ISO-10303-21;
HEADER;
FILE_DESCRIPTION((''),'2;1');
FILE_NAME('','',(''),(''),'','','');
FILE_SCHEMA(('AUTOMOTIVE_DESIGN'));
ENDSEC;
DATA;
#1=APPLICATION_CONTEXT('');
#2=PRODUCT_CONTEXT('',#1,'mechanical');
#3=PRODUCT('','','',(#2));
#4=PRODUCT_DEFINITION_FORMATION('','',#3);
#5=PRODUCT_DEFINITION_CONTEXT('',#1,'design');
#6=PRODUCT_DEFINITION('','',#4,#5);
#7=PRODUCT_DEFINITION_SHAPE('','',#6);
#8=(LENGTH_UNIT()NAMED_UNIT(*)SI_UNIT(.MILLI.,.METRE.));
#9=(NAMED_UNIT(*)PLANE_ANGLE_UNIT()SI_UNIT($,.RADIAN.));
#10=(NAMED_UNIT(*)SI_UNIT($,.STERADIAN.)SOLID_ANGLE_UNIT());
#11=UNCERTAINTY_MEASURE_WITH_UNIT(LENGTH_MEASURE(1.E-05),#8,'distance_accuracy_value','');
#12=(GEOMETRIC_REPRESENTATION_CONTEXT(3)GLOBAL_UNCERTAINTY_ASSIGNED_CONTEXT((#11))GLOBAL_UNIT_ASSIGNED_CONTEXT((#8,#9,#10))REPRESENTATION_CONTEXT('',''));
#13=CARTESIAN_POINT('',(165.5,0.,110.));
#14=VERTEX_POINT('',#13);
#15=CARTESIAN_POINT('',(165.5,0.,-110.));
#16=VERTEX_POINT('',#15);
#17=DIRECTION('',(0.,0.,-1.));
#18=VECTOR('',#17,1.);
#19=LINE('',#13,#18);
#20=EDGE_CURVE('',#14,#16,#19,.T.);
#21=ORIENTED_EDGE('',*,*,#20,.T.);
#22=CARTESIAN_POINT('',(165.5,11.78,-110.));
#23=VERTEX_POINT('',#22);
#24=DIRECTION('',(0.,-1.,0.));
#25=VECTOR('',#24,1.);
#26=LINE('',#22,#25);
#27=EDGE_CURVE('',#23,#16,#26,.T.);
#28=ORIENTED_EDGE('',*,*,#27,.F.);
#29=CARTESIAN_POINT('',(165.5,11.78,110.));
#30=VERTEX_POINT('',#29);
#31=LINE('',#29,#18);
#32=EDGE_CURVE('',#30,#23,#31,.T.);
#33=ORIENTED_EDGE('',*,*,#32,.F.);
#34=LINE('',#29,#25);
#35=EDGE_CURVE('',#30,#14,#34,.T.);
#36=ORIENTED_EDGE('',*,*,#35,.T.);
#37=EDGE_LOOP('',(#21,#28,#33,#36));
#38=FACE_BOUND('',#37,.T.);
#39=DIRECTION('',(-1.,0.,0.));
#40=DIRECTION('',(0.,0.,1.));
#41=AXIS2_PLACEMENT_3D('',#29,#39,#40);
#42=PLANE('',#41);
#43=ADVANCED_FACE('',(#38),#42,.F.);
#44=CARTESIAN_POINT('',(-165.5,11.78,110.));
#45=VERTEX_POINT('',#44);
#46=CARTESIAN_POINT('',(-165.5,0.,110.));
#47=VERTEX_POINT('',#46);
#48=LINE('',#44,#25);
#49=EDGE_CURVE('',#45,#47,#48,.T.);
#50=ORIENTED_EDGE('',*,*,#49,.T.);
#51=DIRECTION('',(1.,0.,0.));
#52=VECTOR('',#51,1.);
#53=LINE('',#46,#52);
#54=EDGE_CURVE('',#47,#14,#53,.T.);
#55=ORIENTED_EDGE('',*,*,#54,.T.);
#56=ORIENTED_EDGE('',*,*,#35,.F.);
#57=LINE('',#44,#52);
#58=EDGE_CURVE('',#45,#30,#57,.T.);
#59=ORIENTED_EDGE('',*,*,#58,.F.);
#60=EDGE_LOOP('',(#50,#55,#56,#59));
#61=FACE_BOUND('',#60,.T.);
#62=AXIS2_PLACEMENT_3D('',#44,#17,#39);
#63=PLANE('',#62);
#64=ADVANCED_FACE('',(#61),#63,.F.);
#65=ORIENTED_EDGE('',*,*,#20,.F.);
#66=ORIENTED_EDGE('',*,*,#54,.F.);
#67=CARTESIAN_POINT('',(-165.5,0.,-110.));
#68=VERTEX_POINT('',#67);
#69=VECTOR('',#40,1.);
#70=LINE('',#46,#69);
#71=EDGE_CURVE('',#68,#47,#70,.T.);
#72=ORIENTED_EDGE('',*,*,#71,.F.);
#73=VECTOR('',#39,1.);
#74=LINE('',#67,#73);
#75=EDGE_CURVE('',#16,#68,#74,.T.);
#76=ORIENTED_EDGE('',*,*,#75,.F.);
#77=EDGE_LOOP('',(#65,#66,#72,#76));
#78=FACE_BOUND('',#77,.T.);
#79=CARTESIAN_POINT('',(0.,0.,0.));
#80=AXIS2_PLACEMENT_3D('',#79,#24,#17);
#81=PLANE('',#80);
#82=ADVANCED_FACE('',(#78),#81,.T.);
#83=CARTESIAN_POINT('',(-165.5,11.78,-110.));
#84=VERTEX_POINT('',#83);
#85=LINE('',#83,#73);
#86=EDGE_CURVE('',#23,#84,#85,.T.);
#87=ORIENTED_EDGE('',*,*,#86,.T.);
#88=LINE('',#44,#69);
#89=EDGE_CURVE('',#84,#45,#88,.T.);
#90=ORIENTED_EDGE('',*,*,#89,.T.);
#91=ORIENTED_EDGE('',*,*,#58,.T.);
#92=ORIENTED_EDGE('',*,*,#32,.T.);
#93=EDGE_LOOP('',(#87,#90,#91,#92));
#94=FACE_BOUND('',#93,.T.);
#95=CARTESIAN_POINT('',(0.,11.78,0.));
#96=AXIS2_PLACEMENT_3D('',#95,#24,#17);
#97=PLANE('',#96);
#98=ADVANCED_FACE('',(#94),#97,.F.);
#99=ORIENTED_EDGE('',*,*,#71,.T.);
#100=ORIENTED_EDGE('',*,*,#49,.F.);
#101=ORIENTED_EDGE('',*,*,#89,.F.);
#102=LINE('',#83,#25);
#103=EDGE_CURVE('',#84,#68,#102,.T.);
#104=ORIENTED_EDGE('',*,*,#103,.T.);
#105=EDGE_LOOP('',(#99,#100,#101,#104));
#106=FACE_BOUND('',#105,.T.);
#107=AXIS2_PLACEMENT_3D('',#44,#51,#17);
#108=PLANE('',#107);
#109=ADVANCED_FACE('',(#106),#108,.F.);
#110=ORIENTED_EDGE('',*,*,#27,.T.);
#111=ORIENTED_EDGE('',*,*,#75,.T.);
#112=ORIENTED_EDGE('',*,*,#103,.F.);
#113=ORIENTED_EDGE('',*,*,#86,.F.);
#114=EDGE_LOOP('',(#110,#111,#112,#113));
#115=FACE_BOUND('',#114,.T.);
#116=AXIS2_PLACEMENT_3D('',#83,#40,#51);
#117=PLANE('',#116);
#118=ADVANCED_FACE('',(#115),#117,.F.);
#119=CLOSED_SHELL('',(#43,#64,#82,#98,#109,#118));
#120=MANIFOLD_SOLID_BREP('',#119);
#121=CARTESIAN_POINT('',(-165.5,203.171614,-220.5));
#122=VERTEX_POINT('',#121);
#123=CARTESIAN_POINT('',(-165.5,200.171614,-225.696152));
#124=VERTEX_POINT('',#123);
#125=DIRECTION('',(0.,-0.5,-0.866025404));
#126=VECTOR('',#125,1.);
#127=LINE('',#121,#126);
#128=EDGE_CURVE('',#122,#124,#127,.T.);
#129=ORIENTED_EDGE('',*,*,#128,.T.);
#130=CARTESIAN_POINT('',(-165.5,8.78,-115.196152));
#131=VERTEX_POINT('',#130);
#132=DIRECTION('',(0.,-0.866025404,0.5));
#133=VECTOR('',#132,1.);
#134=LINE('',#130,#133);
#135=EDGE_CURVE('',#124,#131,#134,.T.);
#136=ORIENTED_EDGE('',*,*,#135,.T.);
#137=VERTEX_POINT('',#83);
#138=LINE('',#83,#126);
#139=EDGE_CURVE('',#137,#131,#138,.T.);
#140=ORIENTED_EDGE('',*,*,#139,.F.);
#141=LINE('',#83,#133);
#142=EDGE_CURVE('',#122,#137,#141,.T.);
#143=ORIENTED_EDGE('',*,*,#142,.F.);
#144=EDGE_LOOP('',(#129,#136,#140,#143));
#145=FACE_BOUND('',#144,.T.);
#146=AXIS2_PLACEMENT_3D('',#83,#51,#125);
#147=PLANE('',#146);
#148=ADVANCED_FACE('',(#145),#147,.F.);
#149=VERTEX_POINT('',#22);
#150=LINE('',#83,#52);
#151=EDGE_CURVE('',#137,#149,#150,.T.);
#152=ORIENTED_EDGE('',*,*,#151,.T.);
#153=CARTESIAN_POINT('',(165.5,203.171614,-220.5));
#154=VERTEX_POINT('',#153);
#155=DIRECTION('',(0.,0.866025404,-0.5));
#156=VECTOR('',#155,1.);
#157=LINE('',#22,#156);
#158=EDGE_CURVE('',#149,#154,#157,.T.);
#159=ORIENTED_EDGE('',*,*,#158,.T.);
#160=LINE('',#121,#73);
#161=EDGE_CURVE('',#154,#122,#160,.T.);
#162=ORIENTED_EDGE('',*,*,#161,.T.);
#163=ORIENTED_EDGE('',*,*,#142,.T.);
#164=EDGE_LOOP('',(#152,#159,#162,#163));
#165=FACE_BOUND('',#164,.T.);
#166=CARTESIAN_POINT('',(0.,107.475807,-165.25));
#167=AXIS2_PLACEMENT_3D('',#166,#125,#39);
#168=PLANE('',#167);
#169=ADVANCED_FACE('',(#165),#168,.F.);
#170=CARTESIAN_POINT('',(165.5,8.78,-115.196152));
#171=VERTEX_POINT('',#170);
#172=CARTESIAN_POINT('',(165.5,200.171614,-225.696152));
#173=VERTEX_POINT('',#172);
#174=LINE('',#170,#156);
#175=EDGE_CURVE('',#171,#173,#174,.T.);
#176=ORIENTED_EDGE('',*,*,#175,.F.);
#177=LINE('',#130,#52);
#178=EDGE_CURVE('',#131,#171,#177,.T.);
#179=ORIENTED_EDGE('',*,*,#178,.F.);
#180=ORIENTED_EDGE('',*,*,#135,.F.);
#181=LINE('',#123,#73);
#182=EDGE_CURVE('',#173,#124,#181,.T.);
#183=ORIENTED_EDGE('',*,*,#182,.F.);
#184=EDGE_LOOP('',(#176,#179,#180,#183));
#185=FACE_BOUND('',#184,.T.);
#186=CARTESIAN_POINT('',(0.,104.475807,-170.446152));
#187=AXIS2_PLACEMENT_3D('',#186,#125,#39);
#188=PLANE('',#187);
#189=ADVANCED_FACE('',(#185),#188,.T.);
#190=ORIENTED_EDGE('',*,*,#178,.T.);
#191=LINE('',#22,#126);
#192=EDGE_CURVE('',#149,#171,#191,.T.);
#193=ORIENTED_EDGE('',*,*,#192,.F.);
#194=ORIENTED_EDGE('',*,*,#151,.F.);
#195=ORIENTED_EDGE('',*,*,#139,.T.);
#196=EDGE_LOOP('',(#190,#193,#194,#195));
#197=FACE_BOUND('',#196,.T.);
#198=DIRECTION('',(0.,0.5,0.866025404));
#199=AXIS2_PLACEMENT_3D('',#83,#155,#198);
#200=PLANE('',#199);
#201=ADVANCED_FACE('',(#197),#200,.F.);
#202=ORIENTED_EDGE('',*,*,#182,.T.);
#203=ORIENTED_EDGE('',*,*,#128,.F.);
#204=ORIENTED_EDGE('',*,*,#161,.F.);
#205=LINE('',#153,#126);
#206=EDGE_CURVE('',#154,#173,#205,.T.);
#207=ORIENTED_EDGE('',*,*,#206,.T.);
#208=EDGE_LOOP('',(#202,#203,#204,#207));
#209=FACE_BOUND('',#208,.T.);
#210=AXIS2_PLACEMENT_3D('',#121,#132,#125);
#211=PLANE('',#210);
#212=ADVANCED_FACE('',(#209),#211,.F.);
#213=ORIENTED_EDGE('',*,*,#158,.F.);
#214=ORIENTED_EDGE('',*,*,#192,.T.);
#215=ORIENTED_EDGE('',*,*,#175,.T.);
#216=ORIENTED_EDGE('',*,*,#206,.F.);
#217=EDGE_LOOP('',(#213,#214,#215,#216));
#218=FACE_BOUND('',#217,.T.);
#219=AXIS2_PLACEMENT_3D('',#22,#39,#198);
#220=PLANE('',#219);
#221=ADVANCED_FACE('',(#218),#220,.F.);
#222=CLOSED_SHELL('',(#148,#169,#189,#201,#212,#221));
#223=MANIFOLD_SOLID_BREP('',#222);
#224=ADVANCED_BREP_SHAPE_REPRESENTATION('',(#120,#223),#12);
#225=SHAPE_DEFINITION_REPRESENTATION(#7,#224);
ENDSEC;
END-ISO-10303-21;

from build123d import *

# Parameters (mm, degrees)
SKETCH1_W             = 331
SKETCH1_H             = 220
BOSS_EXTRUDE1_DEPTH   = 11.78
SKETCH2_W             = 331
SKETCH2_H             = 221
BOSS_EXTRUDE2_DEPTH   = 6
BODY_MOVE_COPY2_ANGLE = 30


with BuildPart() as part:
    # Sketch1 → Boss-Extrude1 (new body)
    with BuildSketch(Plane(origin=(0, 0, 0), x_dir=(1, 0, 0), z_dir=(0, 1, 0))):
        Rectangle(SKETCH1_W, SKETCH1_H)
    extrude(amount=BOSS_EXTRUDE1_DEPTH)


with BuildPart() as body_2:
    # Sketch2 → Boss-Extrude2 (new body)
    with BuildSketch(Plane.XY):
        Rectangle(SKETCH2_W, SKETCH2_H)
    extrude(amount=BOSS_EXTRUDE2_DEPTH)


with BuildPart() as body_2_1:
    # Body-Move/Copy2: read off the stored shape, not the designer's step
    # Body-Move/Copy2: moved
    add(body_2.part.moved(Location((0, 175.7017793, -95.3727944))).rotate(Axis((0, 0, 0), (-1, 0, 0)), BODY_MOVE_COPY2_ANGLE))


solid = Compound([part.part, body_2_1.part])
